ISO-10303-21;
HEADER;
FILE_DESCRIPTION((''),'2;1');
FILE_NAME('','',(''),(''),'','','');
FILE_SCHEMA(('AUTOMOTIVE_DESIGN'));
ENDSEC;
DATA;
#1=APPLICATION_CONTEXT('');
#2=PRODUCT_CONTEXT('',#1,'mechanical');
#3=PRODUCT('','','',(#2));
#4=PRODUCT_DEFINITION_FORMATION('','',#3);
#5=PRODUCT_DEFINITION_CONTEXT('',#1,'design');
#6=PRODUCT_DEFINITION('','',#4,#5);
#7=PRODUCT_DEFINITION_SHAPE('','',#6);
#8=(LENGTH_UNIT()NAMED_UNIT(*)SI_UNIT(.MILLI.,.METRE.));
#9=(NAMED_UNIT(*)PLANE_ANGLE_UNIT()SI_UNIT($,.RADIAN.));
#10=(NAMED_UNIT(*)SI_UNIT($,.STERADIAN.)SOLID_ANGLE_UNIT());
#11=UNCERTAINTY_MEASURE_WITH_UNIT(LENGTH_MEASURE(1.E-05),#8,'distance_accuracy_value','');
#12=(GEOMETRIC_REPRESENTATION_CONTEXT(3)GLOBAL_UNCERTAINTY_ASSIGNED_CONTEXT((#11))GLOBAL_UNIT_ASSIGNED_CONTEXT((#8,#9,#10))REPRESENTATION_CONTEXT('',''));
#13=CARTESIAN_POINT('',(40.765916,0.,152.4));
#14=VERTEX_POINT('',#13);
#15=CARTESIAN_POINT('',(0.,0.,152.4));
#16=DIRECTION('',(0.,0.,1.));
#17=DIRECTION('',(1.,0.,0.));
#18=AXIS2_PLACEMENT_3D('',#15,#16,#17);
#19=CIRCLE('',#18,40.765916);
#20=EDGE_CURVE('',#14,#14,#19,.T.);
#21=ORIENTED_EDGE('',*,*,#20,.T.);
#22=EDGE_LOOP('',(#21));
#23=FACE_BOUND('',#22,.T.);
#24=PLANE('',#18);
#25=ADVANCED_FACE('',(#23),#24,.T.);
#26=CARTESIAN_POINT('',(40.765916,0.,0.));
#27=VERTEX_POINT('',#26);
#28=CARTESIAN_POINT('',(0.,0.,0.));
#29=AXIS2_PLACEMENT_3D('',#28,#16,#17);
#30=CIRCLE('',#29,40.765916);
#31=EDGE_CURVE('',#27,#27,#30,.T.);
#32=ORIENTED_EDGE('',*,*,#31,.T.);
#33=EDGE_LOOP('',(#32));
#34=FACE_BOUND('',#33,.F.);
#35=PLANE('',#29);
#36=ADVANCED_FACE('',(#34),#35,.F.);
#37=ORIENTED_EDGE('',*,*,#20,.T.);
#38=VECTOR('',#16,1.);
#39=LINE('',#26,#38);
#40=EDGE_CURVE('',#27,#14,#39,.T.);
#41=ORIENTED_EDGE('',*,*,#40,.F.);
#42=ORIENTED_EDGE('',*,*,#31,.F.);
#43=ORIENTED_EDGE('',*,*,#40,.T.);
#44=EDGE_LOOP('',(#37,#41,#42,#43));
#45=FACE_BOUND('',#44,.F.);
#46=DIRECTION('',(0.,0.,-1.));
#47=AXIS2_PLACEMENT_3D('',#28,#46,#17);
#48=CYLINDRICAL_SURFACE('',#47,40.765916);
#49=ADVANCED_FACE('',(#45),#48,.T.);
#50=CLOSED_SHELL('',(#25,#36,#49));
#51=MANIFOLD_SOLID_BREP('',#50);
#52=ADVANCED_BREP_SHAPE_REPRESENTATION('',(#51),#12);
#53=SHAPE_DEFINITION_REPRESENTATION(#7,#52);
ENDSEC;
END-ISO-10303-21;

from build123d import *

# Parameters (mm, degrees)
F0_R     = 40.765916218
F1_DEPTH = 152.4


# Not quite as in the source:
# - a feature names something its author has since deleted; it is built from what else it names


with BuildPart() as f1:
    # F0 (on Top) → F1 (new body)
    with BuildSketch(Plane.XY):
        Circle(F0_R)
    extrude(amount=F1_DEPTH)


solid = f1.part
